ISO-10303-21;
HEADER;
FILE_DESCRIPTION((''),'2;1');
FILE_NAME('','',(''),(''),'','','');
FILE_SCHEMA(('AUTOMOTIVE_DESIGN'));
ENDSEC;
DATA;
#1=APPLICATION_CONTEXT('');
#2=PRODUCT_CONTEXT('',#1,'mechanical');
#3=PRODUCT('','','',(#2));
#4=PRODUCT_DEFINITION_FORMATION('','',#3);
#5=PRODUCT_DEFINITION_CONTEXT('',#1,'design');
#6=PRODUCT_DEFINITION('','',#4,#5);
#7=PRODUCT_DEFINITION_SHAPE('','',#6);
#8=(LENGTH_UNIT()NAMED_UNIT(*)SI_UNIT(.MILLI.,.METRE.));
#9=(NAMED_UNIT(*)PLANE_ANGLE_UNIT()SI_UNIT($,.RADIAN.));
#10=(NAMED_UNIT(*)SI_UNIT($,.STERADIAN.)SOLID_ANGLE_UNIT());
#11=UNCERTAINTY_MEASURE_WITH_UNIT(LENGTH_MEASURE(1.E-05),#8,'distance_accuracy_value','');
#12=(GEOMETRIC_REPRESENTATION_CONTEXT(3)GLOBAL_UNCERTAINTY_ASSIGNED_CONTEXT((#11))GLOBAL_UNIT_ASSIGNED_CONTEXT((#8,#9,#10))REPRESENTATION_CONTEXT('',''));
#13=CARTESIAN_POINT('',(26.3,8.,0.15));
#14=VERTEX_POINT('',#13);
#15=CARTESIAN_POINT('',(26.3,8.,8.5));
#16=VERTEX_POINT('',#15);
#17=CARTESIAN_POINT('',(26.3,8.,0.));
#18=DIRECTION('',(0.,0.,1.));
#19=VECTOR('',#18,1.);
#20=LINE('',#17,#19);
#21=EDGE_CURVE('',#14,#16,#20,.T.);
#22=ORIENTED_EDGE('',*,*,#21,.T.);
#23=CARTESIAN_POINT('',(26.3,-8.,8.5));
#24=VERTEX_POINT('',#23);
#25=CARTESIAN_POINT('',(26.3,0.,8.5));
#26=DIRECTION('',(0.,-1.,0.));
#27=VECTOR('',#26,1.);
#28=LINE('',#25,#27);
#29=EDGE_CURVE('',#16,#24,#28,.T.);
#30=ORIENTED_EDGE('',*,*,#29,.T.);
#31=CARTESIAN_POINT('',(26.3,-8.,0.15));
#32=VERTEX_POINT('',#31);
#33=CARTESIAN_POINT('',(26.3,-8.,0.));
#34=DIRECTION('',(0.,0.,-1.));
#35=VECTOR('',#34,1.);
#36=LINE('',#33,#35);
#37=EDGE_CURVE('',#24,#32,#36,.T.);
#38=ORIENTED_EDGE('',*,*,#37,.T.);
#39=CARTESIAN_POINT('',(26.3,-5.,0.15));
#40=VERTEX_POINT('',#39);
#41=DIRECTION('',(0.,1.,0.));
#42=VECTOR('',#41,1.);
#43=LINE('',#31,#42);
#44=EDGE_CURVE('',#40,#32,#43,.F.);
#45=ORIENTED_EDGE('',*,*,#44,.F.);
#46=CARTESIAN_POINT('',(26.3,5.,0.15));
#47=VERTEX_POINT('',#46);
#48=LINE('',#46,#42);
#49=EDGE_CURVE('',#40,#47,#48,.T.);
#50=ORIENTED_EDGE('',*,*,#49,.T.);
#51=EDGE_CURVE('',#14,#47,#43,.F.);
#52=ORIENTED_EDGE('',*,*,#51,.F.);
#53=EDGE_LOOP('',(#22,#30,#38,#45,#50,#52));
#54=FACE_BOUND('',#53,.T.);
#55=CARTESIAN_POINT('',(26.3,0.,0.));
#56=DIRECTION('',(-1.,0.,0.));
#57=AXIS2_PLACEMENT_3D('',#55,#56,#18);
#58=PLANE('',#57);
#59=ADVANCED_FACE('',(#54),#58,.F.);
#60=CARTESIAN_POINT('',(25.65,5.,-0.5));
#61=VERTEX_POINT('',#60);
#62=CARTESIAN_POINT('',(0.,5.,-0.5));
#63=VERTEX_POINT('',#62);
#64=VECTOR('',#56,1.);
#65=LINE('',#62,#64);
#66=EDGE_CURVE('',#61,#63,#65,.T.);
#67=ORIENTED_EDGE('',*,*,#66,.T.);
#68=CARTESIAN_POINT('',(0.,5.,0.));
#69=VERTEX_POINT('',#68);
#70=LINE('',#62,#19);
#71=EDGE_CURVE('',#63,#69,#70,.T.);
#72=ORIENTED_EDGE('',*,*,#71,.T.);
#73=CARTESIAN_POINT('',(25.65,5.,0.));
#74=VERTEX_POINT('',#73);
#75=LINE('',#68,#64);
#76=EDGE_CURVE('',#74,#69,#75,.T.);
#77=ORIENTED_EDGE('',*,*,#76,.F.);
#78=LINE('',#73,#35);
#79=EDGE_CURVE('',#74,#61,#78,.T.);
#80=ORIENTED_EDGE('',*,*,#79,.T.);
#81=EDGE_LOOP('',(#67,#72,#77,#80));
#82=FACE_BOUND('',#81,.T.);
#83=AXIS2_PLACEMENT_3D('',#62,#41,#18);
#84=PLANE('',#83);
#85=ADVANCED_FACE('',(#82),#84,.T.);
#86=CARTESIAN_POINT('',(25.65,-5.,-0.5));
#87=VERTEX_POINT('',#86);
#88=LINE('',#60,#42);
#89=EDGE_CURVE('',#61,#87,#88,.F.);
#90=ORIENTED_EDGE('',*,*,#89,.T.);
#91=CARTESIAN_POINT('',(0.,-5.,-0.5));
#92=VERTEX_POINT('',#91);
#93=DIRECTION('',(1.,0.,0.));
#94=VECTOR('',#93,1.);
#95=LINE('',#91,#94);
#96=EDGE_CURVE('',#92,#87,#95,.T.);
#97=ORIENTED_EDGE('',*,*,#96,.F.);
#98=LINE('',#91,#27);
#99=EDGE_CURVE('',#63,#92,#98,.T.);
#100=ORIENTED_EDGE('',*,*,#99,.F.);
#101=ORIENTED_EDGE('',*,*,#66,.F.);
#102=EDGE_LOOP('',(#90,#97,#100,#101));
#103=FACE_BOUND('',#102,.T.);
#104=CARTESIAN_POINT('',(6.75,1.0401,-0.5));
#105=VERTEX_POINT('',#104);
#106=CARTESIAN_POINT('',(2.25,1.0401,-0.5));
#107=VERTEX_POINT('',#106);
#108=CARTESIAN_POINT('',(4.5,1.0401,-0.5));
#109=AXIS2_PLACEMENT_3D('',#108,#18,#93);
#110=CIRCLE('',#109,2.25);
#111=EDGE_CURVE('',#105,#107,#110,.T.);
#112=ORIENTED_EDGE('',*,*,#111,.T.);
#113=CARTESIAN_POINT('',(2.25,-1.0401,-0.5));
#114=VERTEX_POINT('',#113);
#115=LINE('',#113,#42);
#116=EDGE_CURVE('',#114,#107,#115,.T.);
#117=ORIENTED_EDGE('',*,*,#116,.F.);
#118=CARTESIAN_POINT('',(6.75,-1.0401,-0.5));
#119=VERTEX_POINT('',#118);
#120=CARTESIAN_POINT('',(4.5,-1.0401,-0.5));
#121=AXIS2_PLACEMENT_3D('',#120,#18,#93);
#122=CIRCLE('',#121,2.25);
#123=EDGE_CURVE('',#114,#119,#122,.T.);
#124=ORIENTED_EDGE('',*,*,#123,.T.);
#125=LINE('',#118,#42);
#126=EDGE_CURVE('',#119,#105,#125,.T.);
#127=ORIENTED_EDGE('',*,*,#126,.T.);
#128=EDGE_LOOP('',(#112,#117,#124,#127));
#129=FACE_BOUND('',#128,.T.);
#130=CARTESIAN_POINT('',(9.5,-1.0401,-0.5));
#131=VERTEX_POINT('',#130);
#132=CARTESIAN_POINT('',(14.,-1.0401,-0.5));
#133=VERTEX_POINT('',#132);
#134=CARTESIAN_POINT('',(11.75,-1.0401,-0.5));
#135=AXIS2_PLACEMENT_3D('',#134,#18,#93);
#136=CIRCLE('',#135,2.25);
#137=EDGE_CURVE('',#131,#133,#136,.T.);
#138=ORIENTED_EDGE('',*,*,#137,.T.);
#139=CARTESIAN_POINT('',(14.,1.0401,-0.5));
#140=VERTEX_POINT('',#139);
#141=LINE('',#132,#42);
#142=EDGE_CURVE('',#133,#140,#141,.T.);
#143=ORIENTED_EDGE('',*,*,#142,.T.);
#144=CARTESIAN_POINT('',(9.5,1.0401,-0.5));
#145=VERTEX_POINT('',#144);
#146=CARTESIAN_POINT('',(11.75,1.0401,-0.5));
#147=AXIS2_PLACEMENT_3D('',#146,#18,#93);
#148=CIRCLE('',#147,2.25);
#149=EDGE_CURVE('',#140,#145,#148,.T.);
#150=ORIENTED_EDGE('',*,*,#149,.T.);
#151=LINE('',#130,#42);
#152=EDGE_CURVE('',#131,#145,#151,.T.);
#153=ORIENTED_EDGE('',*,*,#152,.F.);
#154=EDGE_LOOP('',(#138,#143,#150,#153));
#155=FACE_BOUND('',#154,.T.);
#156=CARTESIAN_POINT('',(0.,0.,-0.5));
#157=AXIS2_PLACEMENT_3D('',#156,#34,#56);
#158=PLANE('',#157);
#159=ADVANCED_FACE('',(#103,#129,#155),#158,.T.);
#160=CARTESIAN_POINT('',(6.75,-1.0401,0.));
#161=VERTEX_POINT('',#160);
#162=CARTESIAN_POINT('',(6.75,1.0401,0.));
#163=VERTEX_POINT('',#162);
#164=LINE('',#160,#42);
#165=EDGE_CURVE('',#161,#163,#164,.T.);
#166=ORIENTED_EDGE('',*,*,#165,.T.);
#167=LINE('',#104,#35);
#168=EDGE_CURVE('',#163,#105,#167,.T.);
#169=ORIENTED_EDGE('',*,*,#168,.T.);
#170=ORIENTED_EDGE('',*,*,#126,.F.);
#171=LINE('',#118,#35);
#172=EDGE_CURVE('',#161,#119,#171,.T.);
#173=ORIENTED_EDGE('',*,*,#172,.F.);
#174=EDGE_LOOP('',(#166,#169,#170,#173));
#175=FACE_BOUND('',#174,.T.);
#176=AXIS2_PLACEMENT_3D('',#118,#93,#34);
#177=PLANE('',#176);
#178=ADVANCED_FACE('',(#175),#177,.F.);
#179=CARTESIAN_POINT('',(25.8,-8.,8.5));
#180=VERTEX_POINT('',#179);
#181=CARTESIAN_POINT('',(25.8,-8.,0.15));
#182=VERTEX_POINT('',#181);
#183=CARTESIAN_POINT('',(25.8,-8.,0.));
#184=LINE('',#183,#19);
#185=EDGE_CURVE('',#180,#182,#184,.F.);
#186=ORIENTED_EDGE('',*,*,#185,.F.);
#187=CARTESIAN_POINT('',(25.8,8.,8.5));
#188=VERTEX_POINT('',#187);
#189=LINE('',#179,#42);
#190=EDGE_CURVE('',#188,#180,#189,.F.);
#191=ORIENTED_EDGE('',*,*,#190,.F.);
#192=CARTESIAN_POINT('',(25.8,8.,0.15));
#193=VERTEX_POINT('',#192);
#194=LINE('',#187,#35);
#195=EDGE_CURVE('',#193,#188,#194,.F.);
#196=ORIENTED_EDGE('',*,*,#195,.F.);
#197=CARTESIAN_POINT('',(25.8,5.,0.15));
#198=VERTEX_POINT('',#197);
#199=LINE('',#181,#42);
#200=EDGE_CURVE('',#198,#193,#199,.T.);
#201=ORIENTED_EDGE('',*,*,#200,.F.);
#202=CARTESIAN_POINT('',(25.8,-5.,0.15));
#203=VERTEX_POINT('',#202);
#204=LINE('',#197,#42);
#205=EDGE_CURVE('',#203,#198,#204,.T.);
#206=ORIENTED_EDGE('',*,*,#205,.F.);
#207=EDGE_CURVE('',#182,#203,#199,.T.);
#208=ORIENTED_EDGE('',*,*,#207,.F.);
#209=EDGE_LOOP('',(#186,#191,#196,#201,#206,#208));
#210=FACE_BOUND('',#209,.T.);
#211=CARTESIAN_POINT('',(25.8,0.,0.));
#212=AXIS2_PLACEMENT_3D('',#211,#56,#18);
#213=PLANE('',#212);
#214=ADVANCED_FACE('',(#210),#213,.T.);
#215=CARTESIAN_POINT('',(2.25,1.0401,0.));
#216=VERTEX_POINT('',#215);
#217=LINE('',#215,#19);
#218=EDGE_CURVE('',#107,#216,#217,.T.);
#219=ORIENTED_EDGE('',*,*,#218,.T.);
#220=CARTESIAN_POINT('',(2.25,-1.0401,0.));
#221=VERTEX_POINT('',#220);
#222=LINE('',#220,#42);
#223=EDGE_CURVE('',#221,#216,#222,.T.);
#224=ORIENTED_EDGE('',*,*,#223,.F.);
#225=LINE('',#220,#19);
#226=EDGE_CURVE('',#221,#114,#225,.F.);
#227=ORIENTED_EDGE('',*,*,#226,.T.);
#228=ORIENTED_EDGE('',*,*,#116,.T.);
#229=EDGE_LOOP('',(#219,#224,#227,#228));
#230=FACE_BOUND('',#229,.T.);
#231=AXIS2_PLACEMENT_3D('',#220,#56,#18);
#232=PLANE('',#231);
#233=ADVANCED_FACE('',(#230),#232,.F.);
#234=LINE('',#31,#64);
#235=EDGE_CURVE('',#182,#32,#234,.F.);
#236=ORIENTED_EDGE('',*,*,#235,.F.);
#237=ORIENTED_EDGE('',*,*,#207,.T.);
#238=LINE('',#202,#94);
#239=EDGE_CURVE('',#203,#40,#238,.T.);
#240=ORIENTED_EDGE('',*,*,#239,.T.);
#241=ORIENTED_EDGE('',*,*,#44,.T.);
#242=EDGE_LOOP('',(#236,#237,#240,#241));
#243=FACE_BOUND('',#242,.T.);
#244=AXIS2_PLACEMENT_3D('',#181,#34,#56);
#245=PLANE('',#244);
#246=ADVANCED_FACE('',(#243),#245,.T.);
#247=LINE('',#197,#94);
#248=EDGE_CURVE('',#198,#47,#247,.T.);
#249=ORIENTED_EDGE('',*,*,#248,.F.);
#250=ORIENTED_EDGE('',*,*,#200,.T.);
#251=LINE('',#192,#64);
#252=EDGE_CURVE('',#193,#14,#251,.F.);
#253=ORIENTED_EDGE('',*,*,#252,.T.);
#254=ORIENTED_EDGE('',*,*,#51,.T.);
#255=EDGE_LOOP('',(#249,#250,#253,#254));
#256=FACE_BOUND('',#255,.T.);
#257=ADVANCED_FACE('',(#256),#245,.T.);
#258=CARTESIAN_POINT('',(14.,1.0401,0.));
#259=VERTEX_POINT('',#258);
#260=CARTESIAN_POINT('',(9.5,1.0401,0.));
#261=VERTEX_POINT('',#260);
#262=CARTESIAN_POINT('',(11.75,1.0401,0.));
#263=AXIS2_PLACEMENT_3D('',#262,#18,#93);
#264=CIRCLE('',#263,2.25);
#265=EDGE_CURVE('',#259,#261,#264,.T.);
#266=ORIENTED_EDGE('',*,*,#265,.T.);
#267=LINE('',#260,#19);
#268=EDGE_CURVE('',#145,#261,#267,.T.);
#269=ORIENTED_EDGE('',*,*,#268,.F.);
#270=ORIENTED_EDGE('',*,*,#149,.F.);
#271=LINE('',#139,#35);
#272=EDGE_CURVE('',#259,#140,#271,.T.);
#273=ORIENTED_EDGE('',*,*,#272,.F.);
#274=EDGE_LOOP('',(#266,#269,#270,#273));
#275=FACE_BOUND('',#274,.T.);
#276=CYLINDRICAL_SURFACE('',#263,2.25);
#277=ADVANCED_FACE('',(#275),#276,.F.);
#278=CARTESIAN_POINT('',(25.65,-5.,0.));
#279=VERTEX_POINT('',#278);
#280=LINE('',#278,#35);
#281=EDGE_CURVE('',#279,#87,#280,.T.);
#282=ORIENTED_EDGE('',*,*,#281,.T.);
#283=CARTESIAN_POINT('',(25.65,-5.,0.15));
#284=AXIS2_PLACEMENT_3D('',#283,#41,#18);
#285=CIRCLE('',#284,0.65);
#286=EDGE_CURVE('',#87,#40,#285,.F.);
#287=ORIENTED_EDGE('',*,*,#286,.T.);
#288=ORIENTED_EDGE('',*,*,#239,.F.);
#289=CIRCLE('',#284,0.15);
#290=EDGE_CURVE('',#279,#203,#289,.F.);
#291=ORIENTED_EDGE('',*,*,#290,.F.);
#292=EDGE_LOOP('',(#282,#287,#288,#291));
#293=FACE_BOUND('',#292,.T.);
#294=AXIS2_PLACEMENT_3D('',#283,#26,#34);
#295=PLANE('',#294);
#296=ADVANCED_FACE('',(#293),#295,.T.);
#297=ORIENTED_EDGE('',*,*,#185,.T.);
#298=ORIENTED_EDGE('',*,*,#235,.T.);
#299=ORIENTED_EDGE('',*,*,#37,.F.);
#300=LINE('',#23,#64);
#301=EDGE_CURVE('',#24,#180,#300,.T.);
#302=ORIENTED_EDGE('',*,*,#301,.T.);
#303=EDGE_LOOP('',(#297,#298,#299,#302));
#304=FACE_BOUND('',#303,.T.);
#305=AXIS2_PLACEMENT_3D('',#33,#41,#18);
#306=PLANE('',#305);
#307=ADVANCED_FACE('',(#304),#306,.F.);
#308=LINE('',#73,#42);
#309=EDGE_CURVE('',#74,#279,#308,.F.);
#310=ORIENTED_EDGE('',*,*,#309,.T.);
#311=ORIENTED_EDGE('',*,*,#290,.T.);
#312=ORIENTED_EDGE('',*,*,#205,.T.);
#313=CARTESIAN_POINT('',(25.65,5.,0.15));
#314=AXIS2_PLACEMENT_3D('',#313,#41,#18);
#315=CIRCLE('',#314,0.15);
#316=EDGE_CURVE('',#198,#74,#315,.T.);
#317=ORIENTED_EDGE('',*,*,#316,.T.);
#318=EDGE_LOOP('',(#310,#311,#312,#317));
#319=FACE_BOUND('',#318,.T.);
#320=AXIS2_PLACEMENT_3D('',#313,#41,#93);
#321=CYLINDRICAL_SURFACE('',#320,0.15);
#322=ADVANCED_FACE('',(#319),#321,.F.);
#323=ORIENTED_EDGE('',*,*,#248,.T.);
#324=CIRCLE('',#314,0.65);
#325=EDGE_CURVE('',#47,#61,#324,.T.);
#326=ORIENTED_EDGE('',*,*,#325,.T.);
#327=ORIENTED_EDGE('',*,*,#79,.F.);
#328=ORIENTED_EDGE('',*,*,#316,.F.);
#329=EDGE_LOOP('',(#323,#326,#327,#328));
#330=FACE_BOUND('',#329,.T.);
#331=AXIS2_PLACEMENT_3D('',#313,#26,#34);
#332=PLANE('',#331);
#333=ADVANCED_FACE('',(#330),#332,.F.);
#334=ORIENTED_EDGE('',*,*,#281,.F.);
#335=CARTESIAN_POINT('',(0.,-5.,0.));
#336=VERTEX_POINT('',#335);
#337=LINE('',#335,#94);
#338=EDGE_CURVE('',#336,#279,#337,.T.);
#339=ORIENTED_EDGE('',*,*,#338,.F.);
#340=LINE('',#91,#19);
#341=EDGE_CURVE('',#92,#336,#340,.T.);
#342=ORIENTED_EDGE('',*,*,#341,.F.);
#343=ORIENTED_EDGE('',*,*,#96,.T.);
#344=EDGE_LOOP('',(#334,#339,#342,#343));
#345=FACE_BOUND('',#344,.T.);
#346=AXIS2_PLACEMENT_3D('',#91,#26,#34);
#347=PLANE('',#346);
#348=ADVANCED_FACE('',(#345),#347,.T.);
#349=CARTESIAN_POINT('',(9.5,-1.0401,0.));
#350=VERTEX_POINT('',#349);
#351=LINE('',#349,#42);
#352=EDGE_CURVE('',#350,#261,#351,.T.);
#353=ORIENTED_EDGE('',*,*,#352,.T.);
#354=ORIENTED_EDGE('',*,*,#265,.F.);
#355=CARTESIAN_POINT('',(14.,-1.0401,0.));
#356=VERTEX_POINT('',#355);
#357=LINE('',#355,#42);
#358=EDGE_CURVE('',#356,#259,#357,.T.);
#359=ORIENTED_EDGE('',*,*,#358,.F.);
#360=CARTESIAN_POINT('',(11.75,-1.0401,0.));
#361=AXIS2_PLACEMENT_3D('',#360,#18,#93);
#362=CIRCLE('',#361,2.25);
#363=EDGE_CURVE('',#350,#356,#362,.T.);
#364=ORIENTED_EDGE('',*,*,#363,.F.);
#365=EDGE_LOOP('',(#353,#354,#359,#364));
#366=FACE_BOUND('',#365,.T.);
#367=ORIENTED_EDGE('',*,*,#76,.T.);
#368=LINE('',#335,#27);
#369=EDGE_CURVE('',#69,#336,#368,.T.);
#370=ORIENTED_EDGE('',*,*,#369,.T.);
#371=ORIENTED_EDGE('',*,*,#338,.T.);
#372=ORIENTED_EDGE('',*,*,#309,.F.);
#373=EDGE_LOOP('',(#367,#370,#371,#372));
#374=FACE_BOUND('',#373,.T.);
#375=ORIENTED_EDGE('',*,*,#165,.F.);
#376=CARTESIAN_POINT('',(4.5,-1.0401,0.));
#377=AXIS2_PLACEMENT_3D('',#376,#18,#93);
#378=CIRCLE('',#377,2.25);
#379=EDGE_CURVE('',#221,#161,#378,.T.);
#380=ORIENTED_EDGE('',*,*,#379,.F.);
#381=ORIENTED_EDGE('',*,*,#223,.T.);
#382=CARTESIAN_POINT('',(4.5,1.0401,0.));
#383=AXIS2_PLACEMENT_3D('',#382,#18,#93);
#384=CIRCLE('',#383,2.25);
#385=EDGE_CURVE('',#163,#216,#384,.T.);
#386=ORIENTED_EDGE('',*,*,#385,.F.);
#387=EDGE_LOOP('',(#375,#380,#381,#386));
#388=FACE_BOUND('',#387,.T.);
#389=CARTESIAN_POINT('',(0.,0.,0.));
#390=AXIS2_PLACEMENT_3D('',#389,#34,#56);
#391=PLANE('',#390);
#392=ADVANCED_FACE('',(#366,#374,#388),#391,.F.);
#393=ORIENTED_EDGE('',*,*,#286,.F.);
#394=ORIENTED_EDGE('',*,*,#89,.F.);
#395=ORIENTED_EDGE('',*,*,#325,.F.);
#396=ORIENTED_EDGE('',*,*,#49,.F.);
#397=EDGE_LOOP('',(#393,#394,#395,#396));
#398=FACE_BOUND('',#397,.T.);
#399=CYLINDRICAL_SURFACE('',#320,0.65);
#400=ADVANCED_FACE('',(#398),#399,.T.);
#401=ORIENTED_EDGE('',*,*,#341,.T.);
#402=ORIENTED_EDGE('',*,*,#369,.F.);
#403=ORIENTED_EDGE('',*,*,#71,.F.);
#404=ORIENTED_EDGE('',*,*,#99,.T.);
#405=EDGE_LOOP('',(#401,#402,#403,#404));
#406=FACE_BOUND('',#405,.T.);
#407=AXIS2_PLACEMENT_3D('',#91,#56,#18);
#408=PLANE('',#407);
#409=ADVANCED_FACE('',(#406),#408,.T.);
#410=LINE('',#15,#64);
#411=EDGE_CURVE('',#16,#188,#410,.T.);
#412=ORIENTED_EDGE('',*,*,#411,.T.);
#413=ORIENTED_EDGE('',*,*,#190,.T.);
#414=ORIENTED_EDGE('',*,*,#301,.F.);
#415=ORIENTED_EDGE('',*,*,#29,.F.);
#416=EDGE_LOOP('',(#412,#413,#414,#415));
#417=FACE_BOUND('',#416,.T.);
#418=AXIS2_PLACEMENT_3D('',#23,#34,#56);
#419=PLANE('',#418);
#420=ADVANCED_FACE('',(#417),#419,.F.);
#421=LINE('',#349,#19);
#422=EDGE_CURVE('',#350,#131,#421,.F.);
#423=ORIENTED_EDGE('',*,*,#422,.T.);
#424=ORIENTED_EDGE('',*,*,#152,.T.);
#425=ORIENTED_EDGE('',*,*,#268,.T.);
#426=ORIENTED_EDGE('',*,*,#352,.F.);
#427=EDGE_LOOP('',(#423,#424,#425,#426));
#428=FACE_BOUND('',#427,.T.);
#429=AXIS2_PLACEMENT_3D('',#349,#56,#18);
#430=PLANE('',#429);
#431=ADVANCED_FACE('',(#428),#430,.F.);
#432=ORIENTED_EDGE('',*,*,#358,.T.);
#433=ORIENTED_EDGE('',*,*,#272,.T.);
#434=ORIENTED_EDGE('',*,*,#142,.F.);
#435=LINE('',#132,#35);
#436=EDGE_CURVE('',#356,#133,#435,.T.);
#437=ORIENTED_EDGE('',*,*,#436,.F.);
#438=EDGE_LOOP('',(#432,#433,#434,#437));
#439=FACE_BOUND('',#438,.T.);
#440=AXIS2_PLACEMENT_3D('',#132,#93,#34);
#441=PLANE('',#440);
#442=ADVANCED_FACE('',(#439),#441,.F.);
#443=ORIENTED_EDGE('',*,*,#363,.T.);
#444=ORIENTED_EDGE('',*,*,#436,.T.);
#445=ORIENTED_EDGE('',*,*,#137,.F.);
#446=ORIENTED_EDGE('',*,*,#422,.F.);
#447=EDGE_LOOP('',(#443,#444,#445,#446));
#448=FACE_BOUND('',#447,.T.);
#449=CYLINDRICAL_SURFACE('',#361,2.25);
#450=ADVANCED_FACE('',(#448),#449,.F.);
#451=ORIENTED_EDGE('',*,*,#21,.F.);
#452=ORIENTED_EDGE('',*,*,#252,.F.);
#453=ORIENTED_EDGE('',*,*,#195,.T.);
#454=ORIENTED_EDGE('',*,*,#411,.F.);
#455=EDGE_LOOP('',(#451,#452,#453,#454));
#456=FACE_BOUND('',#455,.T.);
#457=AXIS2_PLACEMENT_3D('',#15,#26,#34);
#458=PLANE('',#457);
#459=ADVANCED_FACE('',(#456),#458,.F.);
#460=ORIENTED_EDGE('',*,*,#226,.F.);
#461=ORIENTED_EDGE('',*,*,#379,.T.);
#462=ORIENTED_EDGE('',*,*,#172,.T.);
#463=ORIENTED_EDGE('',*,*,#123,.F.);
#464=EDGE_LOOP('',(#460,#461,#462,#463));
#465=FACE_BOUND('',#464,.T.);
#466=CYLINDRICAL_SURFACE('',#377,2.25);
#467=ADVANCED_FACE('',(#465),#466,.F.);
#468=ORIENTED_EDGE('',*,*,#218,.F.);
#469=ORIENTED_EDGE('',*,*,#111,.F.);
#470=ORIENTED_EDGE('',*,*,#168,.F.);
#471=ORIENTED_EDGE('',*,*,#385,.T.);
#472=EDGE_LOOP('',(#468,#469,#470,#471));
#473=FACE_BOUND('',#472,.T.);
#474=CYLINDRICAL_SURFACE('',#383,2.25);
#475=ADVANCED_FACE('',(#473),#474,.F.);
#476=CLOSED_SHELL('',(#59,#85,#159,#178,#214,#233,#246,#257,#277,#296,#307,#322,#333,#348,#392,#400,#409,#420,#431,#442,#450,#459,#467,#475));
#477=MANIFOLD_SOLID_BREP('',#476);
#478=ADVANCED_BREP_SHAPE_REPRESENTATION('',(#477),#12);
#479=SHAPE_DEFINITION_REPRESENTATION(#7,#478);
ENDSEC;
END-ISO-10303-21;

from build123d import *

# Parameters (mm, degrees)
SKETCH1_W                    = 26.3
SKETCH1_H                    = 10
BASE_FLANGE1_DEPTH           = 0.5
EDGE_FLANGE1_STRIP_W         = 2.3
EDGE_FLANGE1_STRIP_H         = 0.5
EDGE_FLANGE1_STRIP_CUT_DEPTH = 10
EDGE_FLANGE1_DEPTH           = 10
EDGE_FLANGE1_PROFILE_W       = 16
EDGE_FLANGE1_PROFILE_H       = 8.35
EDGE_FLANGE1_FLAT_DEPTH      = 0.5
M4_START                     = -0.5
M4_CLEARANCE_SLOT1_DEPTH     = 0.5


# Read off the part's stored shape, not the designer's step: M4 Clearance Slot1
# Sheet-metal steps are written as plain solids
with BuildPart() as part:
    # Sketch1 → Base-Flange1 (new body)
    with BuildSketch(Plane.XY):
        with Locations((13.15, 0)):
            Rectangle(SKETCH1_W, SKETCH1_H)
    extrude(amount=-BASE_FLANGE1_DEPTH)

    # Edge-Flange1 strip (across the edge) → Edge-Flange1 strip cut (cut)
    with BuildSketch(Plane(origin=(26.3, -5, 0), x_dir=(-1, 0, 0), z_dir=(0, 1, 0))):
        with Locations((-0.5, -0.25)):
            Rectangle(EDGE_FLANGE1_STRIP_W, EDGE_FLANGE1_STRIP_H)
    extrude(amount=EDGE_FLANGE1_STRIP_CUT_DEPTH, mode=Mode.SUBTRACT)

    # Edge-Flange1 bend section (across the edge) → Edge-Flange1 (add)
    with BuildSketch(Plane(origin=(26.3, -5, 0), x_dir=(-1, 0, 0), z_dir=(0, 1, 0))):
        with BuildLine():
            Line((0, 0.15), (0.5, 0.15))
            ThreePointArc((0.5, 0.15), (0.543933983, 0.043933983), (0.65, 0))
            Line((0.65, 0), (0.65, -0.5))
            ThreePointArc((0.65, -0.5), (0.190380592, -0.309619408), (0, 0.15))
        make_face()
    extrude(amount=EDGE_FLANGE1_DEPTH)

    # Edge-Flange1 profile (on flange) → Edge-Flange1 flat (add)
    with BuildSketch(Plane.YZ.offset(26.3)):
        with Locations((0, 4.325)):
            Rectangle(EDGE_FLANGE1_PROFILE_W, EDGE_FLANGE1_PROFILE_H)
    extrude(amount=-EDGE_FLANGE1_FLAT_DEPTH)

    # M4 Clearance Slot1 outline → M4 Clearance Slot1 (cut)
    with BuildSketch(Plane.XY.offset(M4_START)):
        with BuildLine():
            Line((14, -1.040099885), (14, 1.040099885))
            ThreePointArc((14, 1.040099885), (11.75, 3.290099885), (9.5, 1.040099885))
            Line((9.5, 1.040099885), (9.5, -1.040099885))
            ThreePointArc((9.5, -1.040099885), (11.75, -3.290099885), (14, -1.040099885))
        make_face()
        with BuildLine():
            Line((6.75, -1.040099885), (6.75, 1.040099885))
            ThreePointArc((6.75, 1.040099885), (4.5, 3.290099885), (2.25, 1.040099885))
            Line((2.25, 1.040099885), (2.25, -1.040099885))
            ThreePointArc((2.25, -1.040099885), (4.5, -3.290099885), (6.75, -1.040099885))
        make_face()
    extrude(amount=M4_CLEARANCE_SLOT1_DEPTH, mode=Mode.SUBTRACT)


solid = part.part
